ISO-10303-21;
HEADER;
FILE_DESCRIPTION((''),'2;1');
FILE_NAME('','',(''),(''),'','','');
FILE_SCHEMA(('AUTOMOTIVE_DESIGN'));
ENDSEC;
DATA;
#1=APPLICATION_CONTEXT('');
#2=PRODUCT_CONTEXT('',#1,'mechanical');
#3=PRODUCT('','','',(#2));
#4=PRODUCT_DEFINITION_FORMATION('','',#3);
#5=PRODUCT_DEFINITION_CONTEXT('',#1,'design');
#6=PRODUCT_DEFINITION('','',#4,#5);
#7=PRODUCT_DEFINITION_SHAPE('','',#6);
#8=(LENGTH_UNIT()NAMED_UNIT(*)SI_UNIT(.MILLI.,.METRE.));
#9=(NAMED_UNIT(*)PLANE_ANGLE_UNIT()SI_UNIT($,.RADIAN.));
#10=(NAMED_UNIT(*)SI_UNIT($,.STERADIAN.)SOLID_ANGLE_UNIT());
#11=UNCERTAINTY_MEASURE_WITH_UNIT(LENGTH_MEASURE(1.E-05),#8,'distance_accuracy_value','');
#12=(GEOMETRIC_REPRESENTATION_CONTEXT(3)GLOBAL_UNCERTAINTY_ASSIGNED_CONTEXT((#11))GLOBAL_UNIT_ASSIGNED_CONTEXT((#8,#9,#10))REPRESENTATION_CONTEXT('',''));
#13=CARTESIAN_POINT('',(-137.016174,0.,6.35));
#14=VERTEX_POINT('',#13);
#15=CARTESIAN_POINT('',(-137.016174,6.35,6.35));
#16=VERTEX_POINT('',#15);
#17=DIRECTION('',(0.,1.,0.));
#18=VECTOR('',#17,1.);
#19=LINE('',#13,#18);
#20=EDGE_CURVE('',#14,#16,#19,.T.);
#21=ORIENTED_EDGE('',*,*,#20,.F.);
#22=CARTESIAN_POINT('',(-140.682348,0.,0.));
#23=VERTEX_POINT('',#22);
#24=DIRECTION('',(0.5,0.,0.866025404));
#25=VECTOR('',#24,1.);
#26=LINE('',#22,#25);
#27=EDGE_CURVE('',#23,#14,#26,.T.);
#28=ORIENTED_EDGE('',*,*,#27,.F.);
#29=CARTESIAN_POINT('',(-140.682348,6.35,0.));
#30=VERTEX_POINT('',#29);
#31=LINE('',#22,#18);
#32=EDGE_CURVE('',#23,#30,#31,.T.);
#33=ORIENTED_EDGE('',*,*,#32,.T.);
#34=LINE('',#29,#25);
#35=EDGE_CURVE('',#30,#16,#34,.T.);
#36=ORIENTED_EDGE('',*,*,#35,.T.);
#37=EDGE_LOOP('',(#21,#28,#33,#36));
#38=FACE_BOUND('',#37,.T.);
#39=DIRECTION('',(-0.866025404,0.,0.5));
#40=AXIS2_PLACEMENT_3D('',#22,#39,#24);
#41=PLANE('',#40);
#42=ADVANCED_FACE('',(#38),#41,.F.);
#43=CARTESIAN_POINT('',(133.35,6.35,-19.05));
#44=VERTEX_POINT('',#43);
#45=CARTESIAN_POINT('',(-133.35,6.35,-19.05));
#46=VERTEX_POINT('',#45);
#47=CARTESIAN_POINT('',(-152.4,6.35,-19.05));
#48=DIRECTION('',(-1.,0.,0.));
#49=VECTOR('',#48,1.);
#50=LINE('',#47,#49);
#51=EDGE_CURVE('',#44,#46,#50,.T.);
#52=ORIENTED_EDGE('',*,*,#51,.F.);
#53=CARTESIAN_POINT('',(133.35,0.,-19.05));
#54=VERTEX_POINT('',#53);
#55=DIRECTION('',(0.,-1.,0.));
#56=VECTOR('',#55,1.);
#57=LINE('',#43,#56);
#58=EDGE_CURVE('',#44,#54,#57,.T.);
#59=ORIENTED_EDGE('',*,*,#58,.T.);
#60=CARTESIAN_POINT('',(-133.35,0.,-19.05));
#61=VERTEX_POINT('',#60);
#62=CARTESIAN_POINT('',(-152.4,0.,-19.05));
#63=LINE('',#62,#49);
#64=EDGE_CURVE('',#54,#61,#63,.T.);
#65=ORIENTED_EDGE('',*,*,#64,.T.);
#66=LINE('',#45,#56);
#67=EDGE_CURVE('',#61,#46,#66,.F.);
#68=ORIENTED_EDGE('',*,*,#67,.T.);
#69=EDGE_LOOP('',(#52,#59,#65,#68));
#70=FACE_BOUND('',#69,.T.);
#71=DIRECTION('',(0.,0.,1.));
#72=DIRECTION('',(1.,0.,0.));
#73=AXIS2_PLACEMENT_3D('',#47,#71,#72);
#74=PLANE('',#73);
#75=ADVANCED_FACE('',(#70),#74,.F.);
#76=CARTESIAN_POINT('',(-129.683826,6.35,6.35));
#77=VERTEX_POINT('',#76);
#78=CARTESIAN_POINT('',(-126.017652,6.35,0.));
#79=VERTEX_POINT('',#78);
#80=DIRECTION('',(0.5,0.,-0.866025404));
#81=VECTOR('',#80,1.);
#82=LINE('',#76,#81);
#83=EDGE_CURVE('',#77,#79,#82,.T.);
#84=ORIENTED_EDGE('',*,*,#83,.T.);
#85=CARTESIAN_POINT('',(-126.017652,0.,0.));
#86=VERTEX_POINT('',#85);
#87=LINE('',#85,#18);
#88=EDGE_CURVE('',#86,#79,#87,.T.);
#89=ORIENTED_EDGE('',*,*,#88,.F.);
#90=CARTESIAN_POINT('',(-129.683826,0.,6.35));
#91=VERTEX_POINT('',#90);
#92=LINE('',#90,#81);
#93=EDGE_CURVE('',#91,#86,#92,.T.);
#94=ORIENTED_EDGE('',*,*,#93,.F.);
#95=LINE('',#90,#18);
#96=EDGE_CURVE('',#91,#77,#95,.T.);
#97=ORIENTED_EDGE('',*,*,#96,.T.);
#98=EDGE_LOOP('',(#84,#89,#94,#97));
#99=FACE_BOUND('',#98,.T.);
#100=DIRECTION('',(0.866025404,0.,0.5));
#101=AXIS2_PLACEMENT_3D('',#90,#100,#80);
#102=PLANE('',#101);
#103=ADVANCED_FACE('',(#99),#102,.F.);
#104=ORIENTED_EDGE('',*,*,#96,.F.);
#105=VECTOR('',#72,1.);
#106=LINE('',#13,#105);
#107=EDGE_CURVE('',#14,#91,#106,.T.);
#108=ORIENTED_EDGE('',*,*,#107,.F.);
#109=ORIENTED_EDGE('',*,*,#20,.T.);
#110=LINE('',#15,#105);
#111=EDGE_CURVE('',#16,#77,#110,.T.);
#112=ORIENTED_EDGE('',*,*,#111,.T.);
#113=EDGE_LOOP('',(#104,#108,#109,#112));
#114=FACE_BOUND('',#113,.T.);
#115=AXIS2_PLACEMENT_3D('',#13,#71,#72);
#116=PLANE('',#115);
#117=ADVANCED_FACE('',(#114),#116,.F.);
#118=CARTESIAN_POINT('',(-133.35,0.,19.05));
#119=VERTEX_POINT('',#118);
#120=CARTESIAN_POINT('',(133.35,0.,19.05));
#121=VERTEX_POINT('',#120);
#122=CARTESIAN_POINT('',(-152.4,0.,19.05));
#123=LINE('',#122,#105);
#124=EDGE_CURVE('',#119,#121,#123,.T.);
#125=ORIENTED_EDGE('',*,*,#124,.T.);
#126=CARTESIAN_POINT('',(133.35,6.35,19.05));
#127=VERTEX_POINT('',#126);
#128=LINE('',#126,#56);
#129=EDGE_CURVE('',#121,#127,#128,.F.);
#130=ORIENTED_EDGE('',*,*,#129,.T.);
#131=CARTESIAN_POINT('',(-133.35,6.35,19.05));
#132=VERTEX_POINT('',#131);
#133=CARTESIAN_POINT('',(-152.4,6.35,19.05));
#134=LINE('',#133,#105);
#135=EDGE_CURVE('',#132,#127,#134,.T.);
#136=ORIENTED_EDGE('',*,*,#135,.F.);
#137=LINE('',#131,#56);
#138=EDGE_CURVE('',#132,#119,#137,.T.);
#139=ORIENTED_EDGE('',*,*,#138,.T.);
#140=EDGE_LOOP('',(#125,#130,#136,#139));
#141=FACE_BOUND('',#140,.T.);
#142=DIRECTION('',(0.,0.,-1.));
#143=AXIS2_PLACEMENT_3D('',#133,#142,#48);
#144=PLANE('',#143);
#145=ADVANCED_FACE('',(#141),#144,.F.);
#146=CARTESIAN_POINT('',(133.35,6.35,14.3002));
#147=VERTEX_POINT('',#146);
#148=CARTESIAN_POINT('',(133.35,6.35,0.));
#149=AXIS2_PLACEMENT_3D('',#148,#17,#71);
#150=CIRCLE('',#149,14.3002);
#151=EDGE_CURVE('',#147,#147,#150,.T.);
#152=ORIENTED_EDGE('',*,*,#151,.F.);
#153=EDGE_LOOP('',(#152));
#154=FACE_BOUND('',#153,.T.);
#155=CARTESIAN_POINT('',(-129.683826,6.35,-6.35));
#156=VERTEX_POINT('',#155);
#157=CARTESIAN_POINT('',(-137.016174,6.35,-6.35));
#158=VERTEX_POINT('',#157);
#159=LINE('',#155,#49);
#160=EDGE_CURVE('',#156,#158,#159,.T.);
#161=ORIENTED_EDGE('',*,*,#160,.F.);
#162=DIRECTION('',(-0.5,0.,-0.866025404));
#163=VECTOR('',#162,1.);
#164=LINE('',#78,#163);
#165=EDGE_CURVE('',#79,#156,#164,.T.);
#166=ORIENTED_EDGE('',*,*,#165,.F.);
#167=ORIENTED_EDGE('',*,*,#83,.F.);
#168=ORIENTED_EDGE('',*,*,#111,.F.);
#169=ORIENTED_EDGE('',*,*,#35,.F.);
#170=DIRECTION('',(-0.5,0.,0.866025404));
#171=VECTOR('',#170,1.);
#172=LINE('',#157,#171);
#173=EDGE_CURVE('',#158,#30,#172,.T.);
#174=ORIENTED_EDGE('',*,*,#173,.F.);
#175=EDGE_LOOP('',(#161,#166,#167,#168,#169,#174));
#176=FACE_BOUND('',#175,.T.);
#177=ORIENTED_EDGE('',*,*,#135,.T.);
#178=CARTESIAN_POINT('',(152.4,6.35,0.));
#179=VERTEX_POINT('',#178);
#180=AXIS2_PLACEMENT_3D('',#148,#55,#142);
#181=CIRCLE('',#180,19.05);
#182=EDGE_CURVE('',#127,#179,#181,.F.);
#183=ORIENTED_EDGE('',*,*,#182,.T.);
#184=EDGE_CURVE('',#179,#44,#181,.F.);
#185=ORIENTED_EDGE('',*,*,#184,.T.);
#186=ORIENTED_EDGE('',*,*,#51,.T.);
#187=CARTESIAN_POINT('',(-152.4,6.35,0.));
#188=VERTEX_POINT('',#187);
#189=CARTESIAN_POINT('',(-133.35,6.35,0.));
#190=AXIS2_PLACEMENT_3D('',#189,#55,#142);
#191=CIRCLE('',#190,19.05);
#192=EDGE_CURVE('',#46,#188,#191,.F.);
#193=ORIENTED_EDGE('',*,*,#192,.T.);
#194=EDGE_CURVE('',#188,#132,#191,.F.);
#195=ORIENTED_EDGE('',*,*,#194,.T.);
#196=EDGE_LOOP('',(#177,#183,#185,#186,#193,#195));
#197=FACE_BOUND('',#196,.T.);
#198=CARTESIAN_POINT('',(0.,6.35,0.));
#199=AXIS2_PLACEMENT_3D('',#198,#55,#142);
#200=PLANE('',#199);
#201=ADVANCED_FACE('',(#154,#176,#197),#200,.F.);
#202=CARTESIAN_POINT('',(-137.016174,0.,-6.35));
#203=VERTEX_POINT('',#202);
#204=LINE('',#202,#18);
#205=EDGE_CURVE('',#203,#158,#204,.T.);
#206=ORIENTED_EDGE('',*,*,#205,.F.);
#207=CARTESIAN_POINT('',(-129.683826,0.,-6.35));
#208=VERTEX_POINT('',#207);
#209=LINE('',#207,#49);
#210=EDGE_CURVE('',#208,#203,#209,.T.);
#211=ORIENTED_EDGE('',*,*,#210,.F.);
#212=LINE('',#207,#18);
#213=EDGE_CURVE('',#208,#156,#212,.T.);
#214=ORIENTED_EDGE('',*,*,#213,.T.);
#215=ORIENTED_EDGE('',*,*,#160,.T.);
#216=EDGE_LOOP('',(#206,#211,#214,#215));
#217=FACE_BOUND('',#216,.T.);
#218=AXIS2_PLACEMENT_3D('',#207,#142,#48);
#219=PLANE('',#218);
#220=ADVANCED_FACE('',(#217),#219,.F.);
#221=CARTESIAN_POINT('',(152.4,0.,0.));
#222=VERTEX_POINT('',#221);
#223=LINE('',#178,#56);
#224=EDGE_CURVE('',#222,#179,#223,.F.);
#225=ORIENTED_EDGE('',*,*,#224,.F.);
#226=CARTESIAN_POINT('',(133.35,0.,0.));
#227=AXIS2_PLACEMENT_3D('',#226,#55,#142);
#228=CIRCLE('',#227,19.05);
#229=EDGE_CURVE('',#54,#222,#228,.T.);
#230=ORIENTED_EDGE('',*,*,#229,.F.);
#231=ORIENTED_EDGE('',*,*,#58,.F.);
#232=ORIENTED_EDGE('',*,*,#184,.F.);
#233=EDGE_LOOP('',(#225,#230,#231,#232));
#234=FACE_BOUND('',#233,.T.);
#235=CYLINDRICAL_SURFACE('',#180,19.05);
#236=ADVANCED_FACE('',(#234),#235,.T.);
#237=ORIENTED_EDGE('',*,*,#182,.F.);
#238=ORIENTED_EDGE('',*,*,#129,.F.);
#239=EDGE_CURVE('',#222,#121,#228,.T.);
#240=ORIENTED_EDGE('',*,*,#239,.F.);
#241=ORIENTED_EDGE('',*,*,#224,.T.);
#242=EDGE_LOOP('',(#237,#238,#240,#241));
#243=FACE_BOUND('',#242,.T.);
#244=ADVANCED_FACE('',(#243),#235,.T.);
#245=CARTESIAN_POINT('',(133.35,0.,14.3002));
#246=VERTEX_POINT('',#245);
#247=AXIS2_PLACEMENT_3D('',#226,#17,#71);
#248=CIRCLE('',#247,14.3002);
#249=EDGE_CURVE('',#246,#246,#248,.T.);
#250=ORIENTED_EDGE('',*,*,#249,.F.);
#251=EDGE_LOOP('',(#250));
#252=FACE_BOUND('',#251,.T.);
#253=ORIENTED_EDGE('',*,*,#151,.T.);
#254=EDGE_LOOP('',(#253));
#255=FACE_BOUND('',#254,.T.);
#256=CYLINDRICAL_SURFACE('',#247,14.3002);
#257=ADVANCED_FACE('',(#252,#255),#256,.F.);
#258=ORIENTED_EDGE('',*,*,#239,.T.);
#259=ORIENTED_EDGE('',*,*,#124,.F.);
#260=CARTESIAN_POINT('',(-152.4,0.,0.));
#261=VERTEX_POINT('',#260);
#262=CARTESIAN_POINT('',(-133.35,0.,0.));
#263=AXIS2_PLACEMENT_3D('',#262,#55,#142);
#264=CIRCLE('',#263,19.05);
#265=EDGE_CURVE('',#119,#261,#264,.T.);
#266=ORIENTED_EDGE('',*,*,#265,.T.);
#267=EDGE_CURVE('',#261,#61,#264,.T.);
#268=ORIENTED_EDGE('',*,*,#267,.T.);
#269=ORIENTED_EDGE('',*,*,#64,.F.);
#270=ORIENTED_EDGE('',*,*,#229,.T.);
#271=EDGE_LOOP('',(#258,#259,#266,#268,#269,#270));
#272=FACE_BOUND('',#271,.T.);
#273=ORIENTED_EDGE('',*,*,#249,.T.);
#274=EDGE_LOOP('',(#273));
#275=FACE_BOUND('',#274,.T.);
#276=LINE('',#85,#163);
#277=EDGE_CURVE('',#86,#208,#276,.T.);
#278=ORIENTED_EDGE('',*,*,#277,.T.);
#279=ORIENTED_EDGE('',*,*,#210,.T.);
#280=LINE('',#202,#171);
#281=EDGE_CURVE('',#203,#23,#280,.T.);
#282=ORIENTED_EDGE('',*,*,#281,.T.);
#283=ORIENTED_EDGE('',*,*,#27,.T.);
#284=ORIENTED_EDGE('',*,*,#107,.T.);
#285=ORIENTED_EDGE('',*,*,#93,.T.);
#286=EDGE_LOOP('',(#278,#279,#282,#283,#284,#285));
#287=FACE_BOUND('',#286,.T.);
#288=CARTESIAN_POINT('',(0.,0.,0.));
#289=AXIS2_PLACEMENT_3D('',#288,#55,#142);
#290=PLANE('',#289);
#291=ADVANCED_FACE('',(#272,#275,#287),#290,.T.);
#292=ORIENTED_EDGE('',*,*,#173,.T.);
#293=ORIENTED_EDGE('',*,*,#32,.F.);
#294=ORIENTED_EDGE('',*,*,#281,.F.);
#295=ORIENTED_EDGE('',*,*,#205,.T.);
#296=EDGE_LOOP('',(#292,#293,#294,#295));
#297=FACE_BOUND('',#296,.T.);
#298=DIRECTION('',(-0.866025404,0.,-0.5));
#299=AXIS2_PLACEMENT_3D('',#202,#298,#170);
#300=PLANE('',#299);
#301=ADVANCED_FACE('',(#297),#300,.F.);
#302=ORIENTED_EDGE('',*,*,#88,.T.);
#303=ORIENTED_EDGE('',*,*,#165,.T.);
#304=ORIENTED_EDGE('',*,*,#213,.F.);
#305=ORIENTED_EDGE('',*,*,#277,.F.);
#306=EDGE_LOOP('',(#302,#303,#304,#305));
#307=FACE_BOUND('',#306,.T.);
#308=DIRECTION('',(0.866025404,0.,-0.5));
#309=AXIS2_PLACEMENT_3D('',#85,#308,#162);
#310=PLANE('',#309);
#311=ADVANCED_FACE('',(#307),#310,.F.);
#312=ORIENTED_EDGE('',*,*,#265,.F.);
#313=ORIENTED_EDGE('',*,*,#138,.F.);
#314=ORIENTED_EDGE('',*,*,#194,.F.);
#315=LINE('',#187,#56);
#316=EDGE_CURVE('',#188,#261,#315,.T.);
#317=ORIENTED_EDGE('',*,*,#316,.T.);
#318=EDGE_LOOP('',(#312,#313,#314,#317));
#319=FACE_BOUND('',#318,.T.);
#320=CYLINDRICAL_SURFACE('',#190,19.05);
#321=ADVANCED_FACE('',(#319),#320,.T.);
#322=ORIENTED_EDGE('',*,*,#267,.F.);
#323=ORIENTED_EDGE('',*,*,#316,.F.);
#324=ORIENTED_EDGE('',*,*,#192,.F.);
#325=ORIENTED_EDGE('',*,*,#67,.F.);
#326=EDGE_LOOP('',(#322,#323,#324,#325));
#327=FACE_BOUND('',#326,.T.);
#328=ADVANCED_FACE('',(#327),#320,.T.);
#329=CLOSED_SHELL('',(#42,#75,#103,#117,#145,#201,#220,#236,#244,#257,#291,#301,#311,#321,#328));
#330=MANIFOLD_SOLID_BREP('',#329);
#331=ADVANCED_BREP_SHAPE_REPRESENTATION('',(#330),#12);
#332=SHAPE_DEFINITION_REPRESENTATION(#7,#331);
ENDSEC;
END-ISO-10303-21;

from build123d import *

# Parameters (mm, degrees)
SKETCH1_W           = 304.8
SKETCH1_H           = 38.1
BOSS_EXTRUDE1_DEPTH = 6.35
SKETCH2_R           = 14.3002
CUT_EXTRUDE1_DEPTH  = 6.35
CUT_EXTRUDE5_DEPTH  = 6.35
FILLET3_R           = 19.05


with BuildPart() as part:
    # Sketch1 → Boss-Extrude1 (new body)
    with BuildSketch(Plane(origin=(0, 0, 0), x_dir=(1, 0, 0), z_dir=(0, 1, 0))):
        Rectangle(SKETCH1_W, SKETCH1_H)
    extrude(amount=BOSS_EXTRUDE1_DEPTH)

    # Sketch2 → Cut-Extrude1 (cut)
    with BuildSketch(Plane(origin=(0, 6.35, 0), x_dir=(1, 0, 0), z_dir=(0, 1, 0))):
        with Locations(Location((133.35, 0, 0), (0, 0, 270))):
            Circle(SKETCH2_R)
    extrude(amount=-CUT_EXTRUDE1_DEPTH, mode=Mode.SUBTRACT)

    # Sketch8 → Cut-Extrude5 (cut)
    with BuildSketch(Plane(origin=(0, 6.35, 0), x_dir=(1, 0, 0), z_dir=(0, 1, 0))):
        Polygon((-129.683825791, 6.35), (-137.016174209, 6.35), (-140.682348419, 0), (-137.016174209, -6.35), (-129.683825791, -6.35), (-126.017651581, 0), align=None)
    extrude(amount=-CUT_EXTRUDE5_DEPTH, mode=Mode.SUBTRACT)

    # Fillet3
    fillet3_edges = [part.edges().sort_by_distance(p)[0] for p in [
        (152.4, 3.175, 19.05),
        (152.4, 3.175, -19.05),
        (-152.4, 3.175, 19.05),
        (-152.4, 3.175, -19.05),
    ]]
    fillet(fillet3_edges, radius=FILLET3_R - 0.0001)  # a hair under: the kernel refuses the full size


solid = part.part
